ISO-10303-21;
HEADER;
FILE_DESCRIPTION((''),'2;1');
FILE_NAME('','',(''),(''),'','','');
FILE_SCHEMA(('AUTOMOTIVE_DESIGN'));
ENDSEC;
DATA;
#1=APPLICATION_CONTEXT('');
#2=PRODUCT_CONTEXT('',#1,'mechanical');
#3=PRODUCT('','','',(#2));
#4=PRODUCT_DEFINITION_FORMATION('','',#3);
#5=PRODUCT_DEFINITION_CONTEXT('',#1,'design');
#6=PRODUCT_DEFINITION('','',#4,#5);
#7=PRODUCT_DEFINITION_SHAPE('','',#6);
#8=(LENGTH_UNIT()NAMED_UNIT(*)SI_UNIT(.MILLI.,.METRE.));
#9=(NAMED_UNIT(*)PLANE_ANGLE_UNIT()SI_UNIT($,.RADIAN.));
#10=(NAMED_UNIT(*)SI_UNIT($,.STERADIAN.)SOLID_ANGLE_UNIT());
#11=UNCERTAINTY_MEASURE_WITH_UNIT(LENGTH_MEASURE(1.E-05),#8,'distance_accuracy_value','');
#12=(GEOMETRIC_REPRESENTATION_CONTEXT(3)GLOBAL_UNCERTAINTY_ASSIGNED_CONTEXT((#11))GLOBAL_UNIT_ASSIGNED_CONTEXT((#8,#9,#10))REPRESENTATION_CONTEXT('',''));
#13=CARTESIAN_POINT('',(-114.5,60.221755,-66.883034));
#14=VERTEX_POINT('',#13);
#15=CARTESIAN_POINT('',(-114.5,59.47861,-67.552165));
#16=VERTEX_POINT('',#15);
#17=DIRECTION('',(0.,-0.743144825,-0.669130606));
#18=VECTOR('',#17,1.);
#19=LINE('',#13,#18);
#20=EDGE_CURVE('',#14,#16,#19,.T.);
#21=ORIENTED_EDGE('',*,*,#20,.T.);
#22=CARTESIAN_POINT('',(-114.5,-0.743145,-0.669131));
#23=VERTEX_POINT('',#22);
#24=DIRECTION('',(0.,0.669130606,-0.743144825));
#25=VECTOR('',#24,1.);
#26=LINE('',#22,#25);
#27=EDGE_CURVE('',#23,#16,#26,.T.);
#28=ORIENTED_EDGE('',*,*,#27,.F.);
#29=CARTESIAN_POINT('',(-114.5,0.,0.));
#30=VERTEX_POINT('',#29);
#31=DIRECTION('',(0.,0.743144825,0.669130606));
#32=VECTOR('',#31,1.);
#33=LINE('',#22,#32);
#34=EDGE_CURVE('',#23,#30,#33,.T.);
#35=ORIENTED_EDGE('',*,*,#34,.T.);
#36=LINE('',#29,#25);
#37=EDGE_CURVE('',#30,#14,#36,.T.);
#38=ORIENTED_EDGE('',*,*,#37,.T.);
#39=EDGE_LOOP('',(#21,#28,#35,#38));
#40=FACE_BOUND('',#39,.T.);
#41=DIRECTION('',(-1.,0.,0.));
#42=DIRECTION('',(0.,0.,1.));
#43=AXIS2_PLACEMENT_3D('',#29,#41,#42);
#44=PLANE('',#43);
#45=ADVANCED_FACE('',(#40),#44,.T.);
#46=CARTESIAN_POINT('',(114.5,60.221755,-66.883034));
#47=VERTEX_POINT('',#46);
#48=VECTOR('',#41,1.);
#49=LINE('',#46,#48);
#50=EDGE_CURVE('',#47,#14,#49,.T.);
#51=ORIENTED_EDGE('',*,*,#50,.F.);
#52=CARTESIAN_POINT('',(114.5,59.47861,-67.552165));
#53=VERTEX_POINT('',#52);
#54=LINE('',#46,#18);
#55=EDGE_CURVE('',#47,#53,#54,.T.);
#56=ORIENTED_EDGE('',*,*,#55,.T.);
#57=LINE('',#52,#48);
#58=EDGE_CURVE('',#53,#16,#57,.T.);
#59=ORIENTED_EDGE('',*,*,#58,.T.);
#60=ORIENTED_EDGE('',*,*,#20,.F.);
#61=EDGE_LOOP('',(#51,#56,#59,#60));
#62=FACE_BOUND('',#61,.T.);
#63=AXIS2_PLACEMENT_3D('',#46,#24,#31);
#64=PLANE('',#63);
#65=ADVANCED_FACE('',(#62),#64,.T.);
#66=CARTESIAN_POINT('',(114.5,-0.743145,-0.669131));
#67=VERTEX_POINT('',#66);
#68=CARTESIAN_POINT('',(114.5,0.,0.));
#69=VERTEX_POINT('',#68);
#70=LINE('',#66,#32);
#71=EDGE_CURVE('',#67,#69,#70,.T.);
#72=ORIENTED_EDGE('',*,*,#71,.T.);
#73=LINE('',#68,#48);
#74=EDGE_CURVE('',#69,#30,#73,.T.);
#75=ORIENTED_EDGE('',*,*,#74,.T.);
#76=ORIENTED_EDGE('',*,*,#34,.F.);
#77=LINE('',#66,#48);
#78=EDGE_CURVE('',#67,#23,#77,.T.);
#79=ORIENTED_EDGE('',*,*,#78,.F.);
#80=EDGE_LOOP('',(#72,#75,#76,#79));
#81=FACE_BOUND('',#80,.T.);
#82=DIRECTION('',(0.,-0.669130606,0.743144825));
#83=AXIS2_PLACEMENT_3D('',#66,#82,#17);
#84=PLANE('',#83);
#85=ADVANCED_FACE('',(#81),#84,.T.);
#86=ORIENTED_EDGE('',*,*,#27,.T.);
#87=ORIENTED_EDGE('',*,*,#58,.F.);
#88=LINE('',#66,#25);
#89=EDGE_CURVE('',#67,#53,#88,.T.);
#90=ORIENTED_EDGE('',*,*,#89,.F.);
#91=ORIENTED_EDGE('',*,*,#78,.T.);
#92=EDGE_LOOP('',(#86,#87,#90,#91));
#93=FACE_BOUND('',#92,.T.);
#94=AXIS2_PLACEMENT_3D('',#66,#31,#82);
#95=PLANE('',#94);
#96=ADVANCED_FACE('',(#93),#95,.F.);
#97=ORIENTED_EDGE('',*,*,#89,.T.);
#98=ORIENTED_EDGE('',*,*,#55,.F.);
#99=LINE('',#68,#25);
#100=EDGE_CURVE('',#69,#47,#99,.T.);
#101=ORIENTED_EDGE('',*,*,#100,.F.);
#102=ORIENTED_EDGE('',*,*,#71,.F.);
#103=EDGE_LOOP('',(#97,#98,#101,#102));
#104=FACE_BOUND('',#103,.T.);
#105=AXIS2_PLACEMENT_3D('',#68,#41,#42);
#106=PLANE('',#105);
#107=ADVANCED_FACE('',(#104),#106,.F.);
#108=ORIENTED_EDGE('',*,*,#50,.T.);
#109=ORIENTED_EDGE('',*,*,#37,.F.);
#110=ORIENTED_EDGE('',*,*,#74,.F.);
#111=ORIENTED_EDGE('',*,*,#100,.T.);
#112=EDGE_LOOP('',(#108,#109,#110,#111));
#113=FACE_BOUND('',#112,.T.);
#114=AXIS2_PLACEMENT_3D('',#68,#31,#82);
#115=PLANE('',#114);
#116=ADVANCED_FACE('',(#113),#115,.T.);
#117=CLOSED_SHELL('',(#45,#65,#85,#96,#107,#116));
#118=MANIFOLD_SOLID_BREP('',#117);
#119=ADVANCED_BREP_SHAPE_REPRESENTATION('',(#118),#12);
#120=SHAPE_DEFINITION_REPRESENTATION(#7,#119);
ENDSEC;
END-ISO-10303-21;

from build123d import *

# Parameters (mm, degrees)
SM_BASE_FLANGE_1_DEPTH = 114.5


# Sheet-metal steps are written as plain solids
with BuildPart() as part:
    # Sketch 1 → 基体-法兰1 (new, symmetric)
    with BuildSketch(Plane(origin=(0, 0, 0), x_dir=(0, 0, -1), z_dir=(1, 0, 0))):
        Polygon((0, 0), (66.883034293, 60.221754572), (67.552164899, 59.478609747), (0.669130606, -0.743144825), align=None)
    extrude(amount=SM_BASE_FLANGE_1_DEPTH, both=True)


solid = part.part
